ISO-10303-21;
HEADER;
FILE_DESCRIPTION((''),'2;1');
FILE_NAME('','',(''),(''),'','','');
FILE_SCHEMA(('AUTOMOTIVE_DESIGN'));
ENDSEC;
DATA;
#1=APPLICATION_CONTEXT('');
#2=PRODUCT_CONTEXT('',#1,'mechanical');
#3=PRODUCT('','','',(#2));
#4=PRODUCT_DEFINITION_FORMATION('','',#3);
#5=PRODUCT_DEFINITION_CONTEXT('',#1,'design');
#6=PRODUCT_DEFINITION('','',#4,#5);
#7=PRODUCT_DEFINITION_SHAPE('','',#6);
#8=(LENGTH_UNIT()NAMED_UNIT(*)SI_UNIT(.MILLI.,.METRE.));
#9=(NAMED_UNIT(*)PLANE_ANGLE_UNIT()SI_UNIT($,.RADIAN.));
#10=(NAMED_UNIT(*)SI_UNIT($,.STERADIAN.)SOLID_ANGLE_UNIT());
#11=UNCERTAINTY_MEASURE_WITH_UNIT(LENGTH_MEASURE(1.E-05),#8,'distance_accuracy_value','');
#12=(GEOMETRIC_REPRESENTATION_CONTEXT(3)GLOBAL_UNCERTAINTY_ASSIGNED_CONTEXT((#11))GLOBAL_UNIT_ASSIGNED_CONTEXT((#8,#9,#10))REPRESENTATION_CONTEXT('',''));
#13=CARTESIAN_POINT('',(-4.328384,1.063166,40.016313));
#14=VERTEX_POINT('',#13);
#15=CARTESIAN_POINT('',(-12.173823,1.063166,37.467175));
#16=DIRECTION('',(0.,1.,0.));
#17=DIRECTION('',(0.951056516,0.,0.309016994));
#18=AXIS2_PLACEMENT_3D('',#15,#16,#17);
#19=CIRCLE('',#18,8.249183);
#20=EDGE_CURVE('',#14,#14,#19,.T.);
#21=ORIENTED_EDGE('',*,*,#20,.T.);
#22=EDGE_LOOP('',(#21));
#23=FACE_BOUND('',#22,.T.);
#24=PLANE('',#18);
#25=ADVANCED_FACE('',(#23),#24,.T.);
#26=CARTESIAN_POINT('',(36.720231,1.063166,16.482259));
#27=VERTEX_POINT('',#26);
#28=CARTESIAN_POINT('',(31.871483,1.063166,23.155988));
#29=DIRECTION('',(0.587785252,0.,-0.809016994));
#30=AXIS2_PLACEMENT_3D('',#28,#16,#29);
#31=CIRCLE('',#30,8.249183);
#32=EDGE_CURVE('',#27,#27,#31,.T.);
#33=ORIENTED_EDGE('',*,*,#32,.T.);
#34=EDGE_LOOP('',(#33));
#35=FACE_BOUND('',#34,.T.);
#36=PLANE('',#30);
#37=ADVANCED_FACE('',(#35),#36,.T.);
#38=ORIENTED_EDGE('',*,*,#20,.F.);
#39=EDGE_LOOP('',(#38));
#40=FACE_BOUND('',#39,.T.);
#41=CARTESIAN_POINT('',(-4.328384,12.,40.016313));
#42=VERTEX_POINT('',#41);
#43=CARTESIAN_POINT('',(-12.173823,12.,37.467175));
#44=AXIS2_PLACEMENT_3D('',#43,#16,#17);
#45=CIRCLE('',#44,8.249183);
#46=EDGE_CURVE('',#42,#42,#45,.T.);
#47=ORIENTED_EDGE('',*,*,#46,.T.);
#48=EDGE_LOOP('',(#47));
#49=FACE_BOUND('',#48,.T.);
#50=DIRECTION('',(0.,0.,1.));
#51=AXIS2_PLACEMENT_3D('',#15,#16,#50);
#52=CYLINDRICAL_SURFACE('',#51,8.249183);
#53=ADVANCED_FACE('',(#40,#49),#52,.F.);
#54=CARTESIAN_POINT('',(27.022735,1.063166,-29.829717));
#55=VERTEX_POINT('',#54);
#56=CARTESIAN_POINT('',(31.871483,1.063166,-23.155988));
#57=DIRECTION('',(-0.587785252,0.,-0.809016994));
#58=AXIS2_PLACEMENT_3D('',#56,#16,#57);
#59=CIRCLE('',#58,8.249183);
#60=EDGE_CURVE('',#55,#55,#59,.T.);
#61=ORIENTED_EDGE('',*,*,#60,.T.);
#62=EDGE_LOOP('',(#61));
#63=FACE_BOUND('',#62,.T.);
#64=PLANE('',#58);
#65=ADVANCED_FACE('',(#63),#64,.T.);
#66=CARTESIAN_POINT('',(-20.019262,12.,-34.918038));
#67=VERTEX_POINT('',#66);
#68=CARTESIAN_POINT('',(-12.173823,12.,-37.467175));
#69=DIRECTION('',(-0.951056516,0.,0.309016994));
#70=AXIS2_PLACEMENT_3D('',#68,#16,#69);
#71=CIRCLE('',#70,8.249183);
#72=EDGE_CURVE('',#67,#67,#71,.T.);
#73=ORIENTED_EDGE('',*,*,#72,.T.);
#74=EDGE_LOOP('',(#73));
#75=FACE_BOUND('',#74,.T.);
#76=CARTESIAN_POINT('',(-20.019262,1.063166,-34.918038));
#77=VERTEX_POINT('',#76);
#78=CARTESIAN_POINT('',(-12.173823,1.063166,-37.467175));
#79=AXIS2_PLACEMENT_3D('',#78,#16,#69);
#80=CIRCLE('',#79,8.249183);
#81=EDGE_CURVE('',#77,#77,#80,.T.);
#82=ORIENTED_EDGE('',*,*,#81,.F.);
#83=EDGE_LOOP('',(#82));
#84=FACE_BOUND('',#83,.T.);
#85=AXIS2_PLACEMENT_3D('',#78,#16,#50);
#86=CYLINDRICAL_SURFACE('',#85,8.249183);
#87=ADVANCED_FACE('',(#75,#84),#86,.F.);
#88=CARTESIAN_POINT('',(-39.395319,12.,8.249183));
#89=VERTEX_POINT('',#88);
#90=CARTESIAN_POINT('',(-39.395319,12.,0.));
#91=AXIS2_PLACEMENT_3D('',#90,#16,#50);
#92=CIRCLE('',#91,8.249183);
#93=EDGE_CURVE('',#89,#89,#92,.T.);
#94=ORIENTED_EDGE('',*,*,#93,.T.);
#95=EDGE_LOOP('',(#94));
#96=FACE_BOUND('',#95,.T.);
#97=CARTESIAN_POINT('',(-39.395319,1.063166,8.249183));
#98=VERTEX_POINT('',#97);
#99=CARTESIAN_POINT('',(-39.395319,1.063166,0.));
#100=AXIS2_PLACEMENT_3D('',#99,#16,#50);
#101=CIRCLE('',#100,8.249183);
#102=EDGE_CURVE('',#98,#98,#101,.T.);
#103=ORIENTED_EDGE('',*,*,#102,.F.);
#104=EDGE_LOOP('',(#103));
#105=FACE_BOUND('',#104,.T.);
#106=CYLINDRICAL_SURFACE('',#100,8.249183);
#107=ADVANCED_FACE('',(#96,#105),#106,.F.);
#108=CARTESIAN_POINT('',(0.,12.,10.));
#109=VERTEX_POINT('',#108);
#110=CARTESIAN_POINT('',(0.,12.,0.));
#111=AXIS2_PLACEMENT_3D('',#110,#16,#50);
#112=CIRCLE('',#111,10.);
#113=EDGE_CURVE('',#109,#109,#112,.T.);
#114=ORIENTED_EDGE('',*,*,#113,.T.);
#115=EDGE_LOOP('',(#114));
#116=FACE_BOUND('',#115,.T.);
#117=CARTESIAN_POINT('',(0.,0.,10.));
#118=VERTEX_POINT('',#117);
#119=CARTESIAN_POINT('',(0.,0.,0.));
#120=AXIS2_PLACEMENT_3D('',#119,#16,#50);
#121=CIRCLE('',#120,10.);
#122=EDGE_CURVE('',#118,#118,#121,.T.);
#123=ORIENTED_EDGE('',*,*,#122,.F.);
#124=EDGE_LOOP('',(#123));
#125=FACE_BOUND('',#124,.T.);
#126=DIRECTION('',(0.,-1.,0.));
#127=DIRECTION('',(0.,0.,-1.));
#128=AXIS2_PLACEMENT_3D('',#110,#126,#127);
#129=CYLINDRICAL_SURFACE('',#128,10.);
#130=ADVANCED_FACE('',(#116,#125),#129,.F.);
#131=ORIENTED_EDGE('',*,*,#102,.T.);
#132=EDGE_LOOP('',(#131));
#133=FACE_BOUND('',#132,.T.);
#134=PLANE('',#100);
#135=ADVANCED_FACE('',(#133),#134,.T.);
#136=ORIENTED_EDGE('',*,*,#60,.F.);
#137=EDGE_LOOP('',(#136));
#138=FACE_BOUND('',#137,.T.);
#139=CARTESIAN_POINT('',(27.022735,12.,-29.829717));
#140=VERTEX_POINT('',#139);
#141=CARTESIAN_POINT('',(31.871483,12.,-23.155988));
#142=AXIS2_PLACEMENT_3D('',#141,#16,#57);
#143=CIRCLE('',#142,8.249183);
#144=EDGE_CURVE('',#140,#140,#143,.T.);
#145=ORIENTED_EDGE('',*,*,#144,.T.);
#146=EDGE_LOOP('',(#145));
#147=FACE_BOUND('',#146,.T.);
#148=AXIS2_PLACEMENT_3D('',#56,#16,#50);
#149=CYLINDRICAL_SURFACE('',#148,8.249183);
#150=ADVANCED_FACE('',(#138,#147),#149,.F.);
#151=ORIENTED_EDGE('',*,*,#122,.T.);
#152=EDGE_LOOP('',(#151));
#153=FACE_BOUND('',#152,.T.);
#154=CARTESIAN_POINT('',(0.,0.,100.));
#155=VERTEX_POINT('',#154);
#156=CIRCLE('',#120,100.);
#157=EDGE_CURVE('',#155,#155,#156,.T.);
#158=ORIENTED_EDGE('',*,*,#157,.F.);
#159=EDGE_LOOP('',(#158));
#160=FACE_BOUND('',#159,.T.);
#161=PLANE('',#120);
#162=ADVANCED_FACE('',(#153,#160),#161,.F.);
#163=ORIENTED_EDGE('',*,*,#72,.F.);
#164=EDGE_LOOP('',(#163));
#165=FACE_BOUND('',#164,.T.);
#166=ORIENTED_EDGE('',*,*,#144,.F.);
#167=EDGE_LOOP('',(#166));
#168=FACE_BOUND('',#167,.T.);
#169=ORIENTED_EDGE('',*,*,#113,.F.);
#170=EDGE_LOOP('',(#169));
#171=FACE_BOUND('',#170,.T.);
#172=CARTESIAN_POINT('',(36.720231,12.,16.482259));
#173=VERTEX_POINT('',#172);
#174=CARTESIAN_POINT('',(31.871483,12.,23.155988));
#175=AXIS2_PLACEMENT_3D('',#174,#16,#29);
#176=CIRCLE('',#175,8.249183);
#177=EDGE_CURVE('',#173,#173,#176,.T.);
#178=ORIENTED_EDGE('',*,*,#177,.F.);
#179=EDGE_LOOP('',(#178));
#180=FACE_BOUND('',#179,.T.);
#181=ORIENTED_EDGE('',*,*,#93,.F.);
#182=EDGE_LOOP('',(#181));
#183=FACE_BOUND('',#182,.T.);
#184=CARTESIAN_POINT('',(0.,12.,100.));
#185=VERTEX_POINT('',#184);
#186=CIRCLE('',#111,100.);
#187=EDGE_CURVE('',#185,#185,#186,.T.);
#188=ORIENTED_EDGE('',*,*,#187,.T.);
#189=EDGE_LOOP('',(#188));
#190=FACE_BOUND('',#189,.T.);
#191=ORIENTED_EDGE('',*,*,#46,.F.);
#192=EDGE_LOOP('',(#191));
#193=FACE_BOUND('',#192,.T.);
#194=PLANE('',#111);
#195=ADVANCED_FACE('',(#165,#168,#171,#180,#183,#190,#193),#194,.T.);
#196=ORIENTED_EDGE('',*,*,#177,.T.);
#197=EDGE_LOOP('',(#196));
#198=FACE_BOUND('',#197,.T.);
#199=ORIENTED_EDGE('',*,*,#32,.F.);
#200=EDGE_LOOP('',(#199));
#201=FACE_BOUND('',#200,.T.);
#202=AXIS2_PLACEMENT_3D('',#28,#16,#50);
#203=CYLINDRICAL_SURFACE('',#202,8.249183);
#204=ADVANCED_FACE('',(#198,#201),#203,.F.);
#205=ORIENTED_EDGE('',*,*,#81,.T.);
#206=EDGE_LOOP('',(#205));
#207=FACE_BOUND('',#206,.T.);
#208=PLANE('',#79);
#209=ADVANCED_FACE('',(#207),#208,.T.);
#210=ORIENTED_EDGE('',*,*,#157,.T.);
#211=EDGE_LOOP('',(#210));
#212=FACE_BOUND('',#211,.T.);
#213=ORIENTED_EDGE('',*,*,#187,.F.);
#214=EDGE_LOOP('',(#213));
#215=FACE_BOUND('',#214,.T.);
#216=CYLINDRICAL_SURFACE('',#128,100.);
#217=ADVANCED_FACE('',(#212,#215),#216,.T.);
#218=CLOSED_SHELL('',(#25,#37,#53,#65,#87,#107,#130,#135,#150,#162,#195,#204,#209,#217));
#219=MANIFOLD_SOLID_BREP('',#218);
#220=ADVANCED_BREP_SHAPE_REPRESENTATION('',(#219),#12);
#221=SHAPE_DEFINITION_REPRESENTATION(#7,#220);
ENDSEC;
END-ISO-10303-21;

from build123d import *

# Parameters (mm, degrees)
SKETCH1_R           = 100
BOSS_EXTRUDE1_DEPTH = 12
SKETCH2_R           = 10
CUT_EXTRUDE1_DEPTH  = 142.929559994
SKETCH3_R           = 8.249182572
CUT_EXTRUDE2_DEPTH  = 10.936833745
CIRPATTERN1_COUNT   = 5


with BuildPart() as part:
    # Sketch1 → Boss-Extrude1 (new body)
    with BuildSketch(Plane(origin=(0, 0, 0), x_dir=(1, 0, 0), z_dir=(0, 1, 0))):
        Circle(SKETCH1_R)
    extrude(amount=BOSS_EXTRUDE1_DEPTH)

    # Sketch2 → Cut-Extrude1 (cut, through all)
    with BuildSketch(Plane(origin=(0, 0, 0), x_dir=(1, 0, 0), z_dir=(0, 1, 0))):
        Circle(SKETCH2_R)
    extrude(amount=CUT_EXTRUDE1_DEPTH, mode=Mode.SUBTRACT)

    # Sketch3 → Cut-Extrude2 (cut)
    with BuildSketch(Plane(origin=(0, 12, 0), x_dir=(1, 0, 0), z_dir=(0, 1, 0))):
        with Locations((-39.395319409, 0)):
            Circle(SKETCH3_R)
    cut_extrude2 = extrude(amount=-CUT_EXTRUDE2_DEPTH, mode=Mode.SUBTRACT)

    # CirPattern1: Cut-Extrude2 ×5 about axis
    cirpattern1_axis = Axis((0, 0, 0), (0, 1, 0))
    for i in range(1, CIRPATTERN1_COUNT):
        add(cut_extrude2.rotate(cirpattern1_axis, i * 360 / CIRPATTERN1_COUNT), mode=Mode.SUBTRACT)


solid = part.part
